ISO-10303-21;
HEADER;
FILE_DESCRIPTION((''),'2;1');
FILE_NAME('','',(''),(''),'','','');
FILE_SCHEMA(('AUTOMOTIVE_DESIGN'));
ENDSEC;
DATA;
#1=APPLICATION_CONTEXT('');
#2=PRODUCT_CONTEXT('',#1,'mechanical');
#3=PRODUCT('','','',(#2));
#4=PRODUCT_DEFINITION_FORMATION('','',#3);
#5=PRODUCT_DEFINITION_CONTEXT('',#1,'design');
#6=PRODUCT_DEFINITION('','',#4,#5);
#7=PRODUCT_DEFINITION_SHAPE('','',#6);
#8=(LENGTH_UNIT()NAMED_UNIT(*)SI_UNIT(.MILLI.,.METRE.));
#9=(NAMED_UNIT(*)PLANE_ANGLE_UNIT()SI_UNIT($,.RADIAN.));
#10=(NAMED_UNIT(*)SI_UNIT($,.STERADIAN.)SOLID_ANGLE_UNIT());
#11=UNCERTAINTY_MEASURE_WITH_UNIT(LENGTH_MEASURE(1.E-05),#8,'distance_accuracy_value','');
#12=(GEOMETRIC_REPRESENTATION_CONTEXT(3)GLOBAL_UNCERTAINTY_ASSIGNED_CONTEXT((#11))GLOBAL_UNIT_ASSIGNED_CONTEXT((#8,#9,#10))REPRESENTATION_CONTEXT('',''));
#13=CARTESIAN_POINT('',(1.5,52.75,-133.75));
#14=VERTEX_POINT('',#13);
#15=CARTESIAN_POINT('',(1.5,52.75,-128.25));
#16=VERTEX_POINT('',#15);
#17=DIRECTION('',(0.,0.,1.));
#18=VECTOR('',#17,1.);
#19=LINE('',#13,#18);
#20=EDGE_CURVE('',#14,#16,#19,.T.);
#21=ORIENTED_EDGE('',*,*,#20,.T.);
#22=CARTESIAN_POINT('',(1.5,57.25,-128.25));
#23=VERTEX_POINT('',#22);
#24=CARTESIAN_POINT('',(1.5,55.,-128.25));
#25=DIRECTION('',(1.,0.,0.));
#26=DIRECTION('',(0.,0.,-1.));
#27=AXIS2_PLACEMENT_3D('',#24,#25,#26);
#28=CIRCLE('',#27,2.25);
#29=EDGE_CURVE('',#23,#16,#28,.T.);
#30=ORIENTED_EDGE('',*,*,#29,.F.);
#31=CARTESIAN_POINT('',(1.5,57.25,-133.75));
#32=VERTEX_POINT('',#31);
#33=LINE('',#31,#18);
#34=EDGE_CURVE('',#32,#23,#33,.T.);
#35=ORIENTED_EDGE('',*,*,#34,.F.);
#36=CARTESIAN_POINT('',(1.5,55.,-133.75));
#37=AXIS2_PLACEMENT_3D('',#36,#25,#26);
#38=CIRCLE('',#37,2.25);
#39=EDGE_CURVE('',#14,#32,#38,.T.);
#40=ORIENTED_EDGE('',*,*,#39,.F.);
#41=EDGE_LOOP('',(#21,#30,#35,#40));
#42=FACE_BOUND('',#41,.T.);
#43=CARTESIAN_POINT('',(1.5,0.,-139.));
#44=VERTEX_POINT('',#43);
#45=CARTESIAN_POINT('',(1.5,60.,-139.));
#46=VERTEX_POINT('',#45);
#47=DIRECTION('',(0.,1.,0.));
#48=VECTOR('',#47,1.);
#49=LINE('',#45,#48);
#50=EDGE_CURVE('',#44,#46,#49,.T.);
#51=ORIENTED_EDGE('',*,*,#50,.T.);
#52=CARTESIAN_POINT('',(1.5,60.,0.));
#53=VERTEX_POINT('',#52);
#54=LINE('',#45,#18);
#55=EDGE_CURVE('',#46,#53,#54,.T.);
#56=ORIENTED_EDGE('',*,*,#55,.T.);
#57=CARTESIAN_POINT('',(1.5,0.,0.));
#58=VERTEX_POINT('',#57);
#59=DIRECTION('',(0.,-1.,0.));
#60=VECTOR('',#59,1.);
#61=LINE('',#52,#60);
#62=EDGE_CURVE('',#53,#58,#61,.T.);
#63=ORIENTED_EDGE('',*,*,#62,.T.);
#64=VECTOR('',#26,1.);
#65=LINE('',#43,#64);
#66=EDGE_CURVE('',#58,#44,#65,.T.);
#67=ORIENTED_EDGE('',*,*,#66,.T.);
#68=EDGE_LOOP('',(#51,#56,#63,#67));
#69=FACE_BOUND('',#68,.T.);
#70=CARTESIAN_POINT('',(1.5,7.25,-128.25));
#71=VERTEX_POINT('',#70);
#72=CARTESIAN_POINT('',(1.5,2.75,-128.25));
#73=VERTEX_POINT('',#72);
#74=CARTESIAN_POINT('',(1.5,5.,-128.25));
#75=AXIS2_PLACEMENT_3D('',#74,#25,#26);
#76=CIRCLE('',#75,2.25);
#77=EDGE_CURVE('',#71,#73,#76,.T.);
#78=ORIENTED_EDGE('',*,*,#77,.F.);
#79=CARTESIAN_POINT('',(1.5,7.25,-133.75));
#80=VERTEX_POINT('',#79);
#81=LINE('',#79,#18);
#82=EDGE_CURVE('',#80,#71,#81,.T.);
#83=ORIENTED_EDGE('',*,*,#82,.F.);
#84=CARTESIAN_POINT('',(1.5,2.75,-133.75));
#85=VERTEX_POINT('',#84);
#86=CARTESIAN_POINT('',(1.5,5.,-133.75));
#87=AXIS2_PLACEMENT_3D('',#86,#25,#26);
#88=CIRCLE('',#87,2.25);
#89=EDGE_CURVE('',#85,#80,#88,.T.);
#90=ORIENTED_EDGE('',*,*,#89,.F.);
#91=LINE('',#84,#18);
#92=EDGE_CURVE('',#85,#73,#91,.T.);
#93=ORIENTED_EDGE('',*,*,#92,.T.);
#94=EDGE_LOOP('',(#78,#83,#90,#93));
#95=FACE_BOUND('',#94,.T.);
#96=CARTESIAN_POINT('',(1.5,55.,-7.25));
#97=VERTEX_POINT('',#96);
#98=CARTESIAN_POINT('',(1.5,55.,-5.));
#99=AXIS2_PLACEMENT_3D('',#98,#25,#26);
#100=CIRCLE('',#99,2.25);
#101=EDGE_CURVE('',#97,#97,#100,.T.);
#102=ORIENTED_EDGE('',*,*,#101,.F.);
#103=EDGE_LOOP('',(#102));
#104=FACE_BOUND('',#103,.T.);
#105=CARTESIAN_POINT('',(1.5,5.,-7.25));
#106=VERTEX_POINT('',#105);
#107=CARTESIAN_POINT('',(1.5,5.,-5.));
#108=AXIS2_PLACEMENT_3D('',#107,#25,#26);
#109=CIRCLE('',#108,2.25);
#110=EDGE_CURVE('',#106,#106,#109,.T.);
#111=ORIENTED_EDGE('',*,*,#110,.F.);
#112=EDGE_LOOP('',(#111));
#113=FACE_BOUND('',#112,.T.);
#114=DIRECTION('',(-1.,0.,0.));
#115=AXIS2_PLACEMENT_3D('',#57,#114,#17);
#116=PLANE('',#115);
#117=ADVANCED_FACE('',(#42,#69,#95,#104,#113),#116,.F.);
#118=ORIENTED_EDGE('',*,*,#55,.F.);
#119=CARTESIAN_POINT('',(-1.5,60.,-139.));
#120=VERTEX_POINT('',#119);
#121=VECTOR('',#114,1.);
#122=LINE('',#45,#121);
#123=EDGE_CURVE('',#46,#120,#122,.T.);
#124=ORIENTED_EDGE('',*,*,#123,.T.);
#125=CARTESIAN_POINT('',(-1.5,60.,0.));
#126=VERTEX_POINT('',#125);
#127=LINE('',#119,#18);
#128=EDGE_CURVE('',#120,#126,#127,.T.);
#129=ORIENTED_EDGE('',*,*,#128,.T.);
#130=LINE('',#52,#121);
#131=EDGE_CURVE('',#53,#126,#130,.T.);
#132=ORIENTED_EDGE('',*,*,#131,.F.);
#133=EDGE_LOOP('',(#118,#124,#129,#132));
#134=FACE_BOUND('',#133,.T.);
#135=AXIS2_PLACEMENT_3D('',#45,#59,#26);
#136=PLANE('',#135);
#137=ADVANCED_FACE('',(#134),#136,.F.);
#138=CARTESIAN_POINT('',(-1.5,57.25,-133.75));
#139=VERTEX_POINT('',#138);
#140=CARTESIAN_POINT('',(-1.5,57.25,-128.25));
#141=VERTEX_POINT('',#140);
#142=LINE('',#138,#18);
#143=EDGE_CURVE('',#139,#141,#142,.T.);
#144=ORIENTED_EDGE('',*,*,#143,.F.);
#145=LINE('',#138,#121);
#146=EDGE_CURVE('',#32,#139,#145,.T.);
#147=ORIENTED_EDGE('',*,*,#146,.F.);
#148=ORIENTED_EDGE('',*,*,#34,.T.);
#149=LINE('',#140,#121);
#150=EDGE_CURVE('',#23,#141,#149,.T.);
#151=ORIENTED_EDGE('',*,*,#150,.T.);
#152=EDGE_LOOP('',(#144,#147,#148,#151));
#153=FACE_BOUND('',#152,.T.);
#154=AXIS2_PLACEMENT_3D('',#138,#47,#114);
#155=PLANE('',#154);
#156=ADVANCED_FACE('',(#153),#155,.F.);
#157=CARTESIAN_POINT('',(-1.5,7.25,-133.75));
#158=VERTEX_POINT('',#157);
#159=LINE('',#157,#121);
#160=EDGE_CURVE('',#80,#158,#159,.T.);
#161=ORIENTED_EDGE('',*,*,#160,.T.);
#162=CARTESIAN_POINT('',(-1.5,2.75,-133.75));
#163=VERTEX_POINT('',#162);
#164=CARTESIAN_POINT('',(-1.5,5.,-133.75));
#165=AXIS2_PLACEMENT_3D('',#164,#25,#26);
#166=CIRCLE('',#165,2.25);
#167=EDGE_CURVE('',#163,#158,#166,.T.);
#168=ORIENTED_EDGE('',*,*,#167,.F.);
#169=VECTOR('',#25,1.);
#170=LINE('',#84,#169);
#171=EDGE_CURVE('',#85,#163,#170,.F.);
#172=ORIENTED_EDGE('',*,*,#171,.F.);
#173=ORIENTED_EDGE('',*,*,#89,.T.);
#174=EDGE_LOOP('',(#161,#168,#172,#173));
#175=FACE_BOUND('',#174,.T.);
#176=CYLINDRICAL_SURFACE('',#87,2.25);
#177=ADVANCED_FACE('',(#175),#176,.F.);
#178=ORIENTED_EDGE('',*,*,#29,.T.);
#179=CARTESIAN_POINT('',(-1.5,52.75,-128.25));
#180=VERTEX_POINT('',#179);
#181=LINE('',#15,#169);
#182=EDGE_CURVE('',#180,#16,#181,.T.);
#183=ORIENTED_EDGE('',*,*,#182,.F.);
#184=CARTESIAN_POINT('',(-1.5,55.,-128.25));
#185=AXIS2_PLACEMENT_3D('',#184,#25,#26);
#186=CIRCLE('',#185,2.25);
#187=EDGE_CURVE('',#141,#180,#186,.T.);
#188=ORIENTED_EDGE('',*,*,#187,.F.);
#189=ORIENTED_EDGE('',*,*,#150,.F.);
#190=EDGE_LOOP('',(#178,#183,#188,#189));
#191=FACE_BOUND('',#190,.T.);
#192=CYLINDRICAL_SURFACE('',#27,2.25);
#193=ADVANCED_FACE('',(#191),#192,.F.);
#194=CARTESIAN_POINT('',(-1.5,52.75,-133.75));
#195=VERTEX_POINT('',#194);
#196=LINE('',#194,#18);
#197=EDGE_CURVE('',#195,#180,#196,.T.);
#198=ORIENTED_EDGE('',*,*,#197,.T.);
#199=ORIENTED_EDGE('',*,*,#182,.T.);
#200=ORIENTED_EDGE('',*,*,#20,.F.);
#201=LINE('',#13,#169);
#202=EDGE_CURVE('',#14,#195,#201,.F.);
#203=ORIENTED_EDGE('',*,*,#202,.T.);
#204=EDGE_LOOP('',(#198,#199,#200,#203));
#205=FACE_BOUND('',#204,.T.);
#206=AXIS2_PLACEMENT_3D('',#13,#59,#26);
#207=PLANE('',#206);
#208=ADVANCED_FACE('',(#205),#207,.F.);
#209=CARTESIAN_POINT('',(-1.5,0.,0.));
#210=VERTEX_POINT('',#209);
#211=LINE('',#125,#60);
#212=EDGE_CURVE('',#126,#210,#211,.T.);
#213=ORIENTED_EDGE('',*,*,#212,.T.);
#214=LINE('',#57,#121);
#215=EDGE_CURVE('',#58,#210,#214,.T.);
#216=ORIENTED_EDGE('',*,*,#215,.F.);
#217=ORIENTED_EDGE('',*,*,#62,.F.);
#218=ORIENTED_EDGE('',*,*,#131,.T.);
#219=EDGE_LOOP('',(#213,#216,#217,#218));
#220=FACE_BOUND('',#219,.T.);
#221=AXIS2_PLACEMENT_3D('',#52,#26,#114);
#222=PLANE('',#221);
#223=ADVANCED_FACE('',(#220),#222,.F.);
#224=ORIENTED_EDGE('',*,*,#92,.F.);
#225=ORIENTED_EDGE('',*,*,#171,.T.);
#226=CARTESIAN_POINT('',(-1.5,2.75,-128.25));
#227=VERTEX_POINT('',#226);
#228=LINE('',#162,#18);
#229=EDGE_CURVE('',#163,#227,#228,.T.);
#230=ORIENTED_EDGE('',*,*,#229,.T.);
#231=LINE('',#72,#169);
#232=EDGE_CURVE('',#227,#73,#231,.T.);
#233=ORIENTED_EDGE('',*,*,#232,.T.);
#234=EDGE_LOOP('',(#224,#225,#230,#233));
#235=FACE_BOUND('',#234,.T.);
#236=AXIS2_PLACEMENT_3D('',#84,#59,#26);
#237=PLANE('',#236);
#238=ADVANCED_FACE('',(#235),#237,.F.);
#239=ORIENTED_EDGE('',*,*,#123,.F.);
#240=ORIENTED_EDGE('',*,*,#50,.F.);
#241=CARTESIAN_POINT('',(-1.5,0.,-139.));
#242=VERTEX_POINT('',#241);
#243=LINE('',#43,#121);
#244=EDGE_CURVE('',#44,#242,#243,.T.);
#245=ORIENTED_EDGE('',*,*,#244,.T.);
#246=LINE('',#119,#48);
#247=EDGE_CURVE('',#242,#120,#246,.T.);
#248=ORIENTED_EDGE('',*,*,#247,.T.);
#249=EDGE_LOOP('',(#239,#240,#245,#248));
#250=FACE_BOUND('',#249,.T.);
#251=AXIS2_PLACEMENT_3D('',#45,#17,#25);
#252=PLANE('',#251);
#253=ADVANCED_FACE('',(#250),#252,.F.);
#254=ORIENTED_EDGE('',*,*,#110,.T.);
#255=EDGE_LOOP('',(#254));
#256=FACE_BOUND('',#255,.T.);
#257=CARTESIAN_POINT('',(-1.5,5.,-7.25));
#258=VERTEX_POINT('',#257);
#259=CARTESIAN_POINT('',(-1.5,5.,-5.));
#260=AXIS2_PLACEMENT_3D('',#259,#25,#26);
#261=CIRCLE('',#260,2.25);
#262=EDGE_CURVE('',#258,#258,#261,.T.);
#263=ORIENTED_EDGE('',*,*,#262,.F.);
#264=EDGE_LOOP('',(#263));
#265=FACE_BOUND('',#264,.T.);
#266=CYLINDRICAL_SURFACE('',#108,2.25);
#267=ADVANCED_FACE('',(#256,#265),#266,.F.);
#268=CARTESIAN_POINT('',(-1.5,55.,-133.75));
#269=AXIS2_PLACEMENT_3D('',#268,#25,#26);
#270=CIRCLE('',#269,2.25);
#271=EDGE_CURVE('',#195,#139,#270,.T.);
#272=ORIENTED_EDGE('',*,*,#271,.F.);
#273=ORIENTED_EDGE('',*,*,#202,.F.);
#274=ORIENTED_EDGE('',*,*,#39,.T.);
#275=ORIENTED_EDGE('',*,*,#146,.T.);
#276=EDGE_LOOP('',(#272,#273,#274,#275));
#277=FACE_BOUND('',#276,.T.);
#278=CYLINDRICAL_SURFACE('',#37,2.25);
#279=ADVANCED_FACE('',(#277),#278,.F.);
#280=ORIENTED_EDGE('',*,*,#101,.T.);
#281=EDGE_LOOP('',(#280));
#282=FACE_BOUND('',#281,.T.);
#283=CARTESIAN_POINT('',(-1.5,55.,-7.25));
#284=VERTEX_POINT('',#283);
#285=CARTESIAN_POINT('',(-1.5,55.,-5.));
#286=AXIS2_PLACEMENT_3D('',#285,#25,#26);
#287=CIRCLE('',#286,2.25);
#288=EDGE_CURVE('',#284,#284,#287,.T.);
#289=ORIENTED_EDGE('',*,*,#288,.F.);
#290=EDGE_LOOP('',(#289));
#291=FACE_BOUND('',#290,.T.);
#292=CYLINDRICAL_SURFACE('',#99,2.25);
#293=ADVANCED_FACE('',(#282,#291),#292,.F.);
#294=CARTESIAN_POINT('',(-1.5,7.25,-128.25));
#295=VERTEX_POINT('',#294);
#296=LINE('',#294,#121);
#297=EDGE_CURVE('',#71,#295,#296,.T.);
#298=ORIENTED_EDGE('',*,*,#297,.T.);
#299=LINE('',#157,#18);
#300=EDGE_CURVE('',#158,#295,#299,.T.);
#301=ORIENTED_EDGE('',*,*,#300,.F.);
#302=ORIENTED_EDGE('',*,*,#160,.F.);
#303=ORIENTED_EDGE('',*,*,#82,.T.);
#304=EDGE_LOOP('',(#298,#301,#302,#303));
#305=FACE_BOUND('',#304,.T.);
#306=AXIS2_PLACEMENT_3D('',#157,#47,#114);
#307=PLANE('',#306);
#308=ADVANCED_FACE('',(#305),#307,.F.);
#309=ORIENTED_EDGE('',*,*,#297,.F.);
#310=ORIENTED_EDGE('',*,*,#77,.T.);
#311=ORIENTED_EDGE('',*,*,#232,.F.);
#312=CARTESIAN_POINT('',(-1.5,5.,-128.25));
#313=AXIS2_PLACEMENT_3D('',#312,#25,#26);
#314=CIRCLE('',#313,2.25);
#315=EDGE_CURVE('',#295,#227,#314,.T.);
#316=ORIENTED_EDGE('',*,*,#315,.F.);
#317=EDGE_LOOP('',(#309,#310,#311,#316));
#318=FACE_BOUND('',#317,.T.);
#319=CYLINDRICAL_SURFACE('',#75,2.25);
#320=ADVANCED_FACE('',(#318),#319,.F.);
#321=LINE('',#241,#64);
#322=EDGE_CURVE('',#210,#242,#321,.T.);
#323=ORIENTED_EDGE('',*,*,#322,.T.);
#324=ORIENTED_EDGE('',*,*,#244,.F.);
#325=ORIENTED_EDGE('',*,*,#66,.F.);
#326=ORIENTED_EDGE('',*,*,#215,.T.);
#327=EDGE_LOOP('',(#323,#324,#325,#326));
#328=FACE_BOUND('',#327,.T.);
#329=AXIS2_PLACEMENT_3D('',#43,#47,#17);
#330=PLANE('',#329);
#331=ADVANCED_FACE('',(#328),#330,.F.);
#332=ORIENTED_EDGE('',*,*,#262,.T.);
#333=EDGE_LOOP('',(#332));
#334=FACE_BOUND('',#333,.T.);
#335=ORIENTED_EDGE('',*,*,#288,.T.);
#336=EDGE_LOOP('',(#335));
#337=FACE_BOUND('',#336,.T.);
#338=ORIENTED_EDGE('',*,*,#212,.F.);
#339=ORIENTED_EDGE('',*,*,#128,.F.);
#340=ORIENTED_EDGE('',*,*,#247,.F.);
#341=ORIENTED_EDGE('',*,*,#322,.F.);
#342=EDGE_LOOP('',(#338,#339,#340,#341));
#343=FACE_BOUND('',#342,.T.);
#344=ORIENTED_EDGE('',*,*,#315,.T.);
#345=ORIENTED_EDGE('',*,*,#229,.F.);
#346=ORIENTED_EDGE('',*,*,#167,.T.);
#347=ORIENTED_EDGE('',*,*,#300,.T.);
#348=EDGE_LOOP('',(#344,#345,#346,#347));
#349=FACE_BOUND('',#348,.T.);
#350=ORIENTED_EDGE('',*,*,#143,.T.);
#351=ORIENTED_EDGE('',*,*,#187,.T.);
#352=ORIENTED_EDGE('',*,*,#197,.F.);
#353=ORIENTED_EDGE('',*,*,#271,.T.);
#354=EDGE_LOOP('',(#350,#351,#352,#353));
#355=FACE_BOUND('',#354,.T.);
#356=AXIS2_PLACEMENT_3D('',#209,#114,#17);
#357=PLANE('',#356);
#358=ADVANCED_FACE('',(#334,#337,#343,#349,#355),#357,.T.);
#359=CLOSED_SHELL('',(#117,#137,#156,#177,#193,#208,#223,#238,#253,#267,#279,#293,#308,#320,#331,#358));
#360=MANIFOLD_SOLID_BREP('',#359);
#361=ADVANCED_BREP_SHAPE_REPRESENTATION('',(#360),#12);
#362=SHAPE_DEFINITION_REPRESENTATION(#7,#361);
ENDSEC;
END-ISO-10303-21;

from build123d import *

# Parameters (mm, degrees)
SKETCH_1_W               = 139
SKETCH_1_H               = 60
EXTRUDE_1_DEPTH          = 1.5
HOLE_WIZARD_M4_1_D       = 4.5
HOLE_START               = -1.5
HOLE_WIZARD_M4_1_2_DEPTH = 3


# Read off the part's stored shape, not the designer's step: M4 间隙槽口1
with BuildPart() as part:
    # 草图1 → 凸台-拉伸1 (new, symmetric)
    with BuildSketch(Plane(origin=(0, 0, 0), x_dir=(0, 0, -1), z_dir=(1, 0, 0))):
        with Locations((69.5, 30)):
            Rectangle(SKETCH_1_W, SKETCH_1_H)
    extrude(amount=EXTRUDE_1_DEPTH, both=True)

    # Hole Wizard M4 _1 (through all)
    with Locations(Plane(origin=(1.5, 0, 0), x_dir=(0, 0, -1), z_dir=(1, 0, 0))):
        with Locations((5, 55), (5, 5)):
            Hole(HOLE_WIZARD_M4_1_D / 2)

    # Hole Wizard M4 _1 2 outline → Hole Wizard M4 _1 2 (cut)
    with BuildSketch(Plane.YZ.offset(HOLE_START)):
        with BuildLine():
            Line((7.25, -133.75), (7.25, -128.25))
            ThreePointArc((7.25, -128.25), (5, -126), (2.75, -128.25))
            Line((2.75, -128.25), (2.75, -133.75))
            ThreePointArc((2.75, -133.75), (5, -136), (7.25, -133.75))
        make_face()
        with BuildLine():
            Line((57.25, -133.75), (57.25, -128.25))
            ThreePointArc((57.25, -128.25), (55, -126), (52.75, -128.25))
            Line((52.75, -128.25), (52.75, -133.75))
            ThreePointArc((52.75, -133.75), (55, -136), (57.25, -133.75))
        make_face()
    extrude(amount=HOLE_WIZARD_M4_1_2_DEPTH, mode=Mode.SUBTRACT)


solid = part.part
